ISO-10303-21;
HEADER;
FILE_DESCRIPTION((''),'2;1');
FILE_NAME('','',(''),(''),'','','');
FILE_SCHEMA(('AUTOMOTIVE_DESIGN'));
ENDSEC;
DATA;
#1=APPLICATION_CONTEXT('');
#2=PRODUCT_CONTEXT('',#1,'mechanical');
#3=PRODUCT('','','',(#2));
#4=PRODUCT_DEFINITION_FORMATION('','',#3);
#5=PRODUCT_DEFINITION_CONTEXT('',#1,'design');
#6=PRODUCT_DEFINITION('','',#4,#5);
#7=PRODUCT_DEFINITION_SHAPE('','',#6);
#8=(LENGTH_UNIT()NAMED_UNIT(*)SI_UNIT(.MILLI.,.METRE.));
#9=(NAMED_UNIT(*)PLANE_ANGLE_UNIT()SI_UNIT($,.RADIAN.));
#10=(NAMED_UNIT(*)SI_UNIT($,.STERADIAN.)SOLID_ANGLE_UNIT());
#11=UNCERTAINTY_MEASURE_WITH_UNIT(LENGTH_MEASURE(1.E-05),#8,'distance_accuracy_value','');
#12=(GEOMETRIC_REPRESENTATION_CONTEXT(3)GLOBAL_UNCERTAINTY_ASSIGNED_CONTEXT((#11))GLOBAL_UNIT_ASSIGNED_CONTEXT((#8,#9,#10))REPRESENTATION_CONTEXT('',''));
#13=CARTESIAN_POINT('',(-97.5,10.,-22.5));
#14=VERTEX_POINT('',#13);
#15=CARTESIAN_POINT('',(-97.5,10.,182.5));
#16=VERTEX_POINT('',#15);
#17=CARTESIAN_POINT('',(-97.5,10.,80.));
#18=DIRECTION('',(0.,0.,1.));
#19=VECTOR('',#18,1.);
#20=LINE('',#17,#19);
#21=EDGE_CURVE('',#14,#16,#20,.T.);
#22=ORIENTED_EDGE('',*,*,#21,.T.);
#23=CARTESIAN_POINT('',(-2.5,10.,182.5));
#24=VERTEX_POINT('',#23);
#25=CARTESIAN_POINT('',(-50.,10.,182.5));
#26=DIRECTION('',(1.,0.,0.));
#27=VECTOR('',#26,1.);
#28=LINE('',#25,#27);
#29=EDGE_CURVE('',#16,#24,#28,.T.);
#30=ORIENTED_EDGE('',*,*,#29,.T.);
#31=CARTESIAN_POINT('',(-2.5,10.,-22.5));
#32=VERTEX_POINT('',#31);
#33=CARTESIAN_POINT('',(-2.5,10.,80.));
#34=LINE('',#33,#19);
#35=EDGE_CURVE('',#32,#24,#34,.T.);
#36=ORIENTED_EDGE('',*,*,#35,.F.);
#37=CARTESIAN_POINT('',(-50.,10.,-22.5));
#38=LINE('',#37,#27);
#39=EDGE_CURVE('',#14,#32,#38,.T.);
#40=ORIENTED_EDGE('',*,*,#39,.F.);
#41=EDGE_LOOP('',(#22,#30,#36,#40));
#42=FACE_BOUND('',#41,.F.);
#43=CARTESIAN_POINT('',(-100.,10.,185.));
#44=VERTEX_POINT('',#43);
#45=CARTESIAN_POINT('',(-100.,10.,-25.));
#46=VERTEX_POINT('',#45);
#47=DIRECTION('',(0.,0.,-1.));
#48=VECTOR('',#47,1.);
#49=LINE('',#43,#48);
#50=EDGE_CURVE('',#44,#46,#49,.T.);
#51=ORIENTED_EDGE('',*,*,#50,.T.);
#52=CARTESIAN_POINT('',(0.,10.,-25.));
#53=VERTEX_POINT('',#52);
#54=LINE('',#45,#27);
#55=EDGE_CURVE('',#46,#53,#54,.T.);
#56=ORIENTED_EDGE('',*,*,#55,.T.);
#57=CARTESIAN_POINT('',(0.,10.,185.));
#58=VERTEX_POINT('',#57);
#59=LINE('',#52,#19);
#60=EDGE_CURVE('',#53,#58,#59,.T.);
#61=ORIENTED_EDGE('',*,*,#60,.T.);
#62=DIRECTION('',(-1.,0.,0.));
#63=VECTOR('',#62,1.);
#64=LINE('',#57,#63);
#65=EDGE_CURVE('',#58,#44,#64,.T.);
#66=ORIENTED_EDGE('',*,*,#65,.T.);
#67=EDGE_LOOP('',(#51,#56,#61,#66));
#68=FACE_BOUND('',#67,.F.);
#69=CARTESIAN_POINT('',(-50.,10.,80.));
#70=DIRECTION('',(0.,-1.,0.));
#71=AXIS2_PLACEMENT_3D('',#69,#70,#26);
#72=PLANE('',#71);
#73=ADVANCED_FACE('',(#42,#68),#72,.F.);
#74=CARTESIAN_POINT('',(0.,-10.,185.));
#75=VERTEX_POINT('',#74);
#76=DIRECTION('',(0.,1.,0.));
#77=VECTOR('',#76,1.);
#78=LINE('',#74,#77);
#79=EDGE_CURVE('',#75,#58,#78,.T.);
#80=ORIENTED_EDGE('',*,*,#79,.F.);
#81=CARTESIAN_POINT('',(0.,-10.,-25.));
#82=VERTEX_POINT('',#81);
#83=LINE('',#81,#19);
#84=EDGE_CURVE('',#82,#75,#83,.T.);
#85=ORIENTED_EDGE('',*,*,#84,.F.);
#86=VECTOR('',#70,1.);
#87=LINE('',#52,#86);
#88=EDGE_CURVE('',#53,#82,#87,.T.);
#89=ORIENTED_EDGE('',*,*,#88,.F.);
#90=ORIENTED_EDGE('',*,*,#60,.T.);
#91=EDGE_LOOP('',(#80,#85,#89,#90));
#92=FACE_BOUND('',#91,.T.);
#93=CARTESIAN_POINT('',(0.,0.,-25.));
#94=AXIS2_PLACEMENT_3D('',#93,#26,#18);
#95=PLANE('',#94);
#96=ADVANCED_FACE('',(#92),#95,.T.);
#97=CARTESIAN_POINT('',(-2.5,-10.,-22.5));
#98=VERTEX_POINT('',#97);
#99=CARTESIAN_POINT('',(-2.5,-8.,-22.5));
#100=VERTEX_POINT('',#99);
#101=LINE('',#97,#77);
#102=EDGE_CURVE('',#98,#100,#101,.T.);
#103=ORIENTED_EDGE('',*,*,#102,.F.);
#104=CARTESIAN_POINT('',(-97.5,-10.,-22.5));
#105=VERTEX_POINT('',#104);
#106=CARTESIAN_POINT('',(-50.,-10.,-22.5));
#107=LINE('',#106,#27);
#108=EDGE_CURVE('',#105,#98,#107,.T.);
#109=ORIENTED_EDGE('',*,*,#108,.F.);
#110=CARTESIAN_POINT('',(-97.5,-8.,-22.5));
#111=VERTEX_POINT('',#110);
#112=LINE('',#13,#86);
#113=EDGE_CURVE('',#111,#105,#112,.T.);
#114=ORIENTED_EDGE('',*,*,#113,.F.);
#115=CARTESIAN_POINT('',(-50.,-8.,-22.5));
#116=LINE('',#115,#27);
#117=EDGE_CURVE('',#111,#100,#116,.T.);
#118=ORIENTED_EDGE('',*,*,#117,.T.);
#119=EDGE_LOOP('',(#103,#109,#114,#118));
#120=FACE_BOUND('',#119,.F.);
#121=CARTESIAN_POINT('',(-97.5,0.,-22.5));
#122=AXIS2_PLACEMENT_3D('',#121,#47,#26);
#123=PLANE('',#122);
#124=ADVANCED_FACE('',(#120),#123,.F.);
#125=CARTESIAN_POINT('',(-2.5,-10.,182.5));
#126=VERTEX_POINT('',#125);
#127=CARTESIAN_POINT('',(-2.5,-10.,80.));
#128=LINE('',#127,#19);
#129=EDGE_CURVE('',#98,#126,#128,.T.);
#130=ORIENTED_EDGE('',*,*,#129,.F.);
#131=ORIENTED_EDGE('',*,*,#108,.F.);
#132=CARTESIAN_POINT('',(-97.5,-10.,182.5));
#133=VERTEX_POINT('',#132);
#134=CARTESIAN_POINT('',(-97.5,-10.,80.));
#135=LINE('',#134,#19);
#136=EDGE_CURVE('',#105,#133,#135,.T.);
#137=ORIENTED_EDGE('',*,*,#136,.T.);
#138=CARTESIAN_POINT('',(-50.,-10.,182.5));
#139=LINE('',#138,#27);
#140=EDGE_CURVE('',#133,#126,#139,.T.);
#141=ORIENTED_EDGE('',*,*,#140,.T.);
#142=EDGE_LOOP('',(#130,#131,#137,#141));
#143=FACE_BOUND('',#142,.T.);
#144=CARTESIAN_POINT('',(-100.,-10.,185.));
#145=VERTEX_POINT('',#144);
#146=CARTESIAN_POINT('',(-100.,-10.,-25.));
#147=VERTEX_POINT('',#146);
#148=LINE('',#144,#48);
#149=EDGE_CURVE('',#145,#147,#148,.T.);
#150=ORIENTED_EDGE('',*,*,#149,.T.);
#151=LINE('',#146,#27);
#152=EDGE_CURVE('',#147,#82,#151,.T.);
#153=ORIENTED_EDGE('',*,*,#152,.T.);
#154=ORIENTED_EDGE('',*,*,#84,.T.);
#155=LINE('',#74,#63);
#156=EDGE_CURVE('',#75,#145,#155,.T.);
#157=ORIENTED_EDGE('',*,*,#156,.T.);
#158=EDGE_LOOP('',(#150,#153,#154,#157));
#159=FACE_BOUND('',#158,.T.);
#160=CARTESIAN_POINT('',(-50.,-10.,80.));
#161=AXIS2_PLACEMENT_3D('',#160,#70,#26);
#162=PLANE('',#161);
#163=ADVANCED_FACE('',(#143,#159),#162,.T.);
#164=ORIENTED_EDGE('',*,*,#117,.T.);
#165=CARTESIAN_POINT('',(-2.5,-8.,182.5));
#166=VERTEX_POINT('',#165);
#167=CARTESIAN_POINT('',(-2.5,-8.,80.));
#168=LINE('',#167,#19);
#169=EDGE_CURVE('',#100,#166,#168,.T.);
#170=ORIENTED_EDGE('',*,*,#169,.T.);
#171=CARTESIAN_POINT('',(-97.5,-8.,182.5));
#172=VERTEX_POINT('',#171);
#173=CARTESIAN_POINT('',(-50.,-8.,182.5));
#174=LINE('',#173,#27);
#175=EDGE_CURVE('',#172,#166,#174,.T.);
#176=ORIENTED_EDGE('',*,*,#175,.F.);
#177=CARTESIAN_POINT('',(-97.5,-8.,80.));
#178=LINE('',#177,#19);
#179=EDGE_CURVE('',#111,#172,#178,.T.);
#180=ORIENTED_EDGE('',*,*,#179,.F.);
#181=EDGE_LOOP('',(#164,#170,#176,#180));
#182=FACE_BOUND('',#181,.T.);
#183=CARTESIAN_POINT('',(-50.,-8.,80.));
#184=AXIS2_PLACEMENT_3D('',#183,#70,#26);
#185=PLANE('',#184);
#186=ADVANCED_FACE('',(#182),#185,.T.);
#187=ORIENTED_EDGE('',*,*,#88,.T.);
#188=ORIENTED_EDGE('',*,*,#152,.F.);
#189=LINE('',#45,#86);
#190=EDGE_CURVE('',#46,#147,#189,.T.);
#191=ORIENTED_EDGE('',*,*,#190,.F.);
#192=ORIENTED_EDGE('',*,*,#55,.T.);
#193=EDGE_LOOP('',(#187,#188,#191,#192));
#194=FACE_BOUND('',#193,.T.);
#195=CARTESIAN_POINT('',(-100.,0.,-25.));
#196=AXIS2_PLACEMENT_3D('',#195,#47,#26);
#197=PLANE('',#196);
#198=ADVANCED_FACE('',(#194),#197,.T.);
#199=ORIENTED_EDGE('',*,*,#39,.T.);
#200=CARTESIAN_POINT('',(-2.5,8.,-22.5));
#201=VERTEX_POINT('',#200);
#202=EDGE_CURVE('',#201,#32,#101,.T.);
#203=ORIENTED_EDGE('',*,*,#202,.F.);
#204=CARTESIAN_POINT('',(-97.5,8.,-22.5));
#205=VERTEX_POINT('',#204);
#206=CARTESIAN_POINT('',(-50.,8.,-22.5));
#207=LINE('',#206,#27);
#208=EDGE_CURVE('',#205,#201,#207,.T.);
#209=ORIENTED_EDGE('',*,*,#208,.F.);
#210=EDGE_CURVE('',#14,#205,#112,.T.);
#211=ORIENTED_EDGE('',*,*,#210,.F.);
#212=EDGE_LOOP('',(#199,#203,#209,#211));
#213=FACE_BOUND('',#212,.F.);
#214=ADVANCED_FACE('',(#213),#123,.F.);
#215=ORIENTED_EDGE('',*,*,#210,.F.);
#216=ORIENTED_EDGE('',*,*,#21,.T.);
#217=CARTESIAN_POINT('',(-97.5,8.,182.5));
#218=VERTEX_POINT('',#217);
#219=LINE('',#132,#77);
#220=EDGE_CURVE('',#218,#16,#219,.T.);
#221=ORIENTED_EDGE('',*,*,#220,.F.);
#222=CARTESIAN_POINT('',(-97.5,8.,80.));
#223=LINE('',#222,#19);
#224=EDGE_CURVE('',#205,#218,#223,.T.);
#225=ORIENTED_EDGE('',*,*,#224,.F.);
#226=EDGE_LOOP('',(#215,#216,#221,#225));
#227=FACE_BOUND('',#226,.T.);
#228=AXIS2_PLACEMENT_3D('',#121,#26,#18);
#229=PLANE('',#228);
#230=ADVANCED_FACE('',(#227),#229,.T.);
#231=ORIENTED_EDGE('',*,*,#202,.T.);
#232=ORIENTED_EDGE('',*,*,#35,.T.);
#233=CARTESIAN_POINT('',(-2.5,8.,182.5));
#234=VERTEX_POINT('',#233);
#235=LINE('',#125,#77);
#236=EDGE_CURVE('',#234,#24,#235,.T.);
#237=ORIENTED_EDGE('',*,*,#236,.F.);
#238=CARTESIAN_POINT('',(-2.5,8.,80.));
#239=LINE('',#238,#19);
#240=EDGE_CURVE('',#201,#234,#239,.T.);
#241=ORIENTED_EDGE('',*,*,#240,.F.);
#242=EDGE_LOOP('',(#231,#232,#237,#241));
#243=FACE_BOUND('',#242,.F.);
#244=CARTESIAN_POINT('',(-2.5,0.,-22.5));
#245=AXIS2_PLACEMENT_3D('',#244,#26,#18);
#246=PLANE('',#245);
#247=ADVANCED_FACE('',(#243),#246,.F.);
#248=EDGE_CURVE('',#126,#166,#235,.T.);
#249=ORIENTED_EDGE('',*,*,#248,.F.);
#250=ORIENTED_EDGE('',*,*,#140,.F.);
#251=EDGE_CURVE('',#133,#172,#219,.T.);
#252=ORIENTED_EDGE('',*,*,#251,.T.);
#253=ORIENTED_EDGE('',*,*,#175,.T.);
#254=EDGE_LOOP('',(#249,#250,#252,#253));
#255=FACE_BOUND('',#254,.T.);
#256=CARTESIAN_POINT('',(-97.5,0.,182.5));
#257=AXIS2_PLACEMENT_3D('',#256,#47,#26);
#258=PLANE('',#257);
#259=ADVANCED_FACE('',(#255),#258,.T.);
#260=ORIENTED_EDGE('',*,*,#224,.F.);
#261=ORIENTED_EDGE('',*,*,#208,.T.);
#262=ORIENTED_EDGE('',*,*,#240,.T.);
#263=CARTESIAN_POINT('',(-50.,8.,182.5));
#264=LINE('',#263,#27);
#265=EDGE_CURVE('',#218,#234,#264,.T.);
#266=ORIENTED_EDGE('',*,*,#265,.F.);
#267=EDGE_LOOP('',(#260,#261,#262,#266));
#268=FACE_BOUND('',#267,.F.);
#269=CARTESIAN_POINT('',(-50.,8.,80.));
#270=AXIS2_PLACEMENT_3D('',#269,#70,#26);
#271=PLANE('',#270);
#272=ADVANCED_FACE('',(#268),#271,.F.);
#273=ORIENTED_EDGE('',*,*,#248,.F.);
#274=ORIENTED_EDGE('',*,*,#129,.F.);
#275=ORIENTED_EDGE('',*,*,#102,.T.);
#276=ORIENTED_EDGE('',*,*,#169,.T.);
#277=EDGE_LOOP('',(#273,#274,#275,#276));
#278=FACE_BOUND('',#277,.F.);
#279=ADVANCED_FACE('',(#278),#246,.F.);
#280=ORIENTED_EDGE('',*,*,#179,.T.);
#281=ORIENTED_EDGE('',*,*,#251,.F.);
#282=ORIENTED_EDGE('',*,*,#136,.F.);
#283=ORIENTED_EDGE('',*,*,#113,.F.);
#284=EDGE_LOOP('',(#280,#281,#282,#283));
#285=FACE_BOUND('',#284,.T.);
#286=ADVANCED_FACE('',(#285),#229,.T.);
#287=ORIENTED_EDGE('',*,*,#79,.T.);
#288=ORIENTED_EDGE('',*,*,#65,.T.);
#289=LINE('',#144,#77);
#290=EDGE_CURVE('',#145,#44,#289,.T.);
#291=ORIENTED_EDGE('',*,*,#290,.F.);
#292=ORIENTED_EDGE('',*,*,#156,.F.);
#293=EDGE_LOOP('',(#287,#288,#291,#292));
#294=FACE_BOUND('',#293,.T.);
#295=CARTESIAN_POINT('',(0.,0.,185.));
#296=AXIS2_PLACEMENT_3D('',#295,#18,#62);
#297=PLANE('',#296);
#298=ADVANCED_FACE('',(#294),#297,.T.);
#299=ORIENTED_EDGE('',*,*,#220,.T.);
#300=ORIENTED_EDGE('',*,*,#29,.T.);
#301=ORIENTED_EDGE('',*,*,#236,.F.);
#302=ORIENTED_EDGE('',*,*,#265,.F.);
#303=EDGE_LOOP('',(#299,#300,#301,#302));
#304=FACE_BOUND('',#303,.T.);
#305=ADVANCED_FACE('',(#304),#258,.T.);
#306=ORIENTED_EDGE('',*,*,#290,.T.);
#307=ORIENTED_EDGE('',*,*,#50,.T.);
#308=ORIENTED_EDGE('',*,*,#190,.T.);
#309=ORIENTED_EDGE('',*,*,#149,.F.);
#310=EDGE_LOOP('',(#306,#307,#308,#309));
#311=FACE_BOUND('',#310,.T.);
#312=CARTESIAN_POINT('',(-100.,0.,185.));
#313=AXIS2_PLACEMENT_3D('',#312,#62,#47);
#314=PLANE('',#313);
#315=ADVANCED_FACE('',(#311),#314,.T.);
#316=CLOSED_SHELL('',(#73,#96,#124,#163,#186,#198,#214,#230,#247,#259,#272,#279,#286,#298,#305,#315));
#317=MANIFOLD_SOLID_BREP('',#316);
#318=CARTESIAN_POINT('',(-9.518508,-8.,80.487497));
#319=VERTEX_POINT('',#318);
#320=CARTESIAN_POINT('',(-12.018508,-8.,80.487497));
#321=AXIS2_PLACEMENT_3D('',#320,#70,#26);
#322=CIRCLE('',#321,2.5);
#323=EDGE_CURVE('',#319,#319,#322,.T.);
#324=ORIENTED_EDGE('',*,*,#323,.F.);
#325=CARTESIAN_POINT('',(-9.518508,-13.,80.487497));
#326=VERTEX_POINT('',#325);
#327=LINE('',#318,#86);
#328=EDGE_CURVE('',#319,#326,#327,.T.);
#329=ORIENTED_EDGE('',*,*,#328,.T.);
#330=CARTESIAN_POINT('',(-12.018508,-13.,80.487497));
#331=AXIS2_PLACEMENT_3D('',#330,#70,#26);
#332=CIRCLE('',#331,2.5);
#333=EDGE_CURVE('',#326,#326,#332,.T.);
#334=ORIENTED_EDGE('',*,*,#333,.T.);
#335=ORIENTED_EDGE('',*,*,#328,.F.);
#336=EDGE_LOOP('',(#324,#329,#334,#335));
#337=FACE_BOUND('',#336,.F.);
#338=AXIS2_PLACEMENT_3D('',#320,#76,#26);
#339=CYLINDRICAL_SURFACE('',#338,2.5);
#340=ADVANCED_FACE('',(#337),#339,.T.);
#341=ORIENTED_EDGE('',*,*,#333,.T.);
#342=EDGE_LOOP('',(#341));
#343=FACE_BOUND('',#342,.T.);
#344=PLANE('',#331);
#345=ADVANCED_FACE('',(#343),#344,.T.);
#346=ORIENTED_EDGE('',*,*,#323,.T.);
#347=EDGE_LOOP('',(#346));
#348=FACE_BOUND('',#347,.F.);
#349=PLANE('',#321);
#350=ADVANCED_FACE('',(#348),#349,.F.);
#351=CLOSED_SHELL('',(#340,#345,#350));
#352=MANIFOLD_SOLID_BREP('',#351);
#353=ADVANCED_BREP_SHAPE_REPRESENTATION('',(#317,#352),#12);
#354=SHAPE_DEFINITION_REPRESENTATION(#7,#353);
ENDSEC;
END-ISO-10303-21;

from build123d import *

# Parameters (mm, degrees)
F0_W          = 95
F0_H          = 205
F1_DEPTH      = 10
F1_DEPTH_BACK = 10
F2_DEPTH      = 8
F2_DEPTH_BACK = 8
F3_R          = 2.5
F4_DEPTH      = 5


with BuildPart() as f1:
    # F0 (on Front) → F1 (new body, two sides)
    with BuildSketch(Plane.XZ) as f1_sk:
        Polygon((-97.5, 185), (-100, 185), (-100, 182.5), (-100, -25), (-2.5, -25), (0, -25), (0, -22.5), (0, 185), align=None)
        with Locations((-50, 80)):
            Rectangle(F0_W, F0_H, mode=Mode.SUBTRACT)
    extrude(amount=F1_DEPTH)
    extrude(f1_sk.sketch, amount=-F1_DEPTH_BACK)

    # F0 (on Front) → F2 (join, two sides)
    with BuildSketch(Plane.XZ) as f2_sk:
        with Locations((-50, 80)):
            Rectangle(F0_W, F0_H)
    extrude(amount=F2_DEPTH)
    extrude(f2_sk.sketch, amount=-F2_DEPTH_BACK)


with BuildPart() as f4:
    # F3 (on face) → F4 (new body)
    with BuildSketch(Plane.XZ.offset(8)):
        with Locations((-12.0185082778, 80.4874971509)):
            Circle(F3_R)
    extrude(amount=F4_DEPTH)


solid = Compound([f1.part, f4.part])
